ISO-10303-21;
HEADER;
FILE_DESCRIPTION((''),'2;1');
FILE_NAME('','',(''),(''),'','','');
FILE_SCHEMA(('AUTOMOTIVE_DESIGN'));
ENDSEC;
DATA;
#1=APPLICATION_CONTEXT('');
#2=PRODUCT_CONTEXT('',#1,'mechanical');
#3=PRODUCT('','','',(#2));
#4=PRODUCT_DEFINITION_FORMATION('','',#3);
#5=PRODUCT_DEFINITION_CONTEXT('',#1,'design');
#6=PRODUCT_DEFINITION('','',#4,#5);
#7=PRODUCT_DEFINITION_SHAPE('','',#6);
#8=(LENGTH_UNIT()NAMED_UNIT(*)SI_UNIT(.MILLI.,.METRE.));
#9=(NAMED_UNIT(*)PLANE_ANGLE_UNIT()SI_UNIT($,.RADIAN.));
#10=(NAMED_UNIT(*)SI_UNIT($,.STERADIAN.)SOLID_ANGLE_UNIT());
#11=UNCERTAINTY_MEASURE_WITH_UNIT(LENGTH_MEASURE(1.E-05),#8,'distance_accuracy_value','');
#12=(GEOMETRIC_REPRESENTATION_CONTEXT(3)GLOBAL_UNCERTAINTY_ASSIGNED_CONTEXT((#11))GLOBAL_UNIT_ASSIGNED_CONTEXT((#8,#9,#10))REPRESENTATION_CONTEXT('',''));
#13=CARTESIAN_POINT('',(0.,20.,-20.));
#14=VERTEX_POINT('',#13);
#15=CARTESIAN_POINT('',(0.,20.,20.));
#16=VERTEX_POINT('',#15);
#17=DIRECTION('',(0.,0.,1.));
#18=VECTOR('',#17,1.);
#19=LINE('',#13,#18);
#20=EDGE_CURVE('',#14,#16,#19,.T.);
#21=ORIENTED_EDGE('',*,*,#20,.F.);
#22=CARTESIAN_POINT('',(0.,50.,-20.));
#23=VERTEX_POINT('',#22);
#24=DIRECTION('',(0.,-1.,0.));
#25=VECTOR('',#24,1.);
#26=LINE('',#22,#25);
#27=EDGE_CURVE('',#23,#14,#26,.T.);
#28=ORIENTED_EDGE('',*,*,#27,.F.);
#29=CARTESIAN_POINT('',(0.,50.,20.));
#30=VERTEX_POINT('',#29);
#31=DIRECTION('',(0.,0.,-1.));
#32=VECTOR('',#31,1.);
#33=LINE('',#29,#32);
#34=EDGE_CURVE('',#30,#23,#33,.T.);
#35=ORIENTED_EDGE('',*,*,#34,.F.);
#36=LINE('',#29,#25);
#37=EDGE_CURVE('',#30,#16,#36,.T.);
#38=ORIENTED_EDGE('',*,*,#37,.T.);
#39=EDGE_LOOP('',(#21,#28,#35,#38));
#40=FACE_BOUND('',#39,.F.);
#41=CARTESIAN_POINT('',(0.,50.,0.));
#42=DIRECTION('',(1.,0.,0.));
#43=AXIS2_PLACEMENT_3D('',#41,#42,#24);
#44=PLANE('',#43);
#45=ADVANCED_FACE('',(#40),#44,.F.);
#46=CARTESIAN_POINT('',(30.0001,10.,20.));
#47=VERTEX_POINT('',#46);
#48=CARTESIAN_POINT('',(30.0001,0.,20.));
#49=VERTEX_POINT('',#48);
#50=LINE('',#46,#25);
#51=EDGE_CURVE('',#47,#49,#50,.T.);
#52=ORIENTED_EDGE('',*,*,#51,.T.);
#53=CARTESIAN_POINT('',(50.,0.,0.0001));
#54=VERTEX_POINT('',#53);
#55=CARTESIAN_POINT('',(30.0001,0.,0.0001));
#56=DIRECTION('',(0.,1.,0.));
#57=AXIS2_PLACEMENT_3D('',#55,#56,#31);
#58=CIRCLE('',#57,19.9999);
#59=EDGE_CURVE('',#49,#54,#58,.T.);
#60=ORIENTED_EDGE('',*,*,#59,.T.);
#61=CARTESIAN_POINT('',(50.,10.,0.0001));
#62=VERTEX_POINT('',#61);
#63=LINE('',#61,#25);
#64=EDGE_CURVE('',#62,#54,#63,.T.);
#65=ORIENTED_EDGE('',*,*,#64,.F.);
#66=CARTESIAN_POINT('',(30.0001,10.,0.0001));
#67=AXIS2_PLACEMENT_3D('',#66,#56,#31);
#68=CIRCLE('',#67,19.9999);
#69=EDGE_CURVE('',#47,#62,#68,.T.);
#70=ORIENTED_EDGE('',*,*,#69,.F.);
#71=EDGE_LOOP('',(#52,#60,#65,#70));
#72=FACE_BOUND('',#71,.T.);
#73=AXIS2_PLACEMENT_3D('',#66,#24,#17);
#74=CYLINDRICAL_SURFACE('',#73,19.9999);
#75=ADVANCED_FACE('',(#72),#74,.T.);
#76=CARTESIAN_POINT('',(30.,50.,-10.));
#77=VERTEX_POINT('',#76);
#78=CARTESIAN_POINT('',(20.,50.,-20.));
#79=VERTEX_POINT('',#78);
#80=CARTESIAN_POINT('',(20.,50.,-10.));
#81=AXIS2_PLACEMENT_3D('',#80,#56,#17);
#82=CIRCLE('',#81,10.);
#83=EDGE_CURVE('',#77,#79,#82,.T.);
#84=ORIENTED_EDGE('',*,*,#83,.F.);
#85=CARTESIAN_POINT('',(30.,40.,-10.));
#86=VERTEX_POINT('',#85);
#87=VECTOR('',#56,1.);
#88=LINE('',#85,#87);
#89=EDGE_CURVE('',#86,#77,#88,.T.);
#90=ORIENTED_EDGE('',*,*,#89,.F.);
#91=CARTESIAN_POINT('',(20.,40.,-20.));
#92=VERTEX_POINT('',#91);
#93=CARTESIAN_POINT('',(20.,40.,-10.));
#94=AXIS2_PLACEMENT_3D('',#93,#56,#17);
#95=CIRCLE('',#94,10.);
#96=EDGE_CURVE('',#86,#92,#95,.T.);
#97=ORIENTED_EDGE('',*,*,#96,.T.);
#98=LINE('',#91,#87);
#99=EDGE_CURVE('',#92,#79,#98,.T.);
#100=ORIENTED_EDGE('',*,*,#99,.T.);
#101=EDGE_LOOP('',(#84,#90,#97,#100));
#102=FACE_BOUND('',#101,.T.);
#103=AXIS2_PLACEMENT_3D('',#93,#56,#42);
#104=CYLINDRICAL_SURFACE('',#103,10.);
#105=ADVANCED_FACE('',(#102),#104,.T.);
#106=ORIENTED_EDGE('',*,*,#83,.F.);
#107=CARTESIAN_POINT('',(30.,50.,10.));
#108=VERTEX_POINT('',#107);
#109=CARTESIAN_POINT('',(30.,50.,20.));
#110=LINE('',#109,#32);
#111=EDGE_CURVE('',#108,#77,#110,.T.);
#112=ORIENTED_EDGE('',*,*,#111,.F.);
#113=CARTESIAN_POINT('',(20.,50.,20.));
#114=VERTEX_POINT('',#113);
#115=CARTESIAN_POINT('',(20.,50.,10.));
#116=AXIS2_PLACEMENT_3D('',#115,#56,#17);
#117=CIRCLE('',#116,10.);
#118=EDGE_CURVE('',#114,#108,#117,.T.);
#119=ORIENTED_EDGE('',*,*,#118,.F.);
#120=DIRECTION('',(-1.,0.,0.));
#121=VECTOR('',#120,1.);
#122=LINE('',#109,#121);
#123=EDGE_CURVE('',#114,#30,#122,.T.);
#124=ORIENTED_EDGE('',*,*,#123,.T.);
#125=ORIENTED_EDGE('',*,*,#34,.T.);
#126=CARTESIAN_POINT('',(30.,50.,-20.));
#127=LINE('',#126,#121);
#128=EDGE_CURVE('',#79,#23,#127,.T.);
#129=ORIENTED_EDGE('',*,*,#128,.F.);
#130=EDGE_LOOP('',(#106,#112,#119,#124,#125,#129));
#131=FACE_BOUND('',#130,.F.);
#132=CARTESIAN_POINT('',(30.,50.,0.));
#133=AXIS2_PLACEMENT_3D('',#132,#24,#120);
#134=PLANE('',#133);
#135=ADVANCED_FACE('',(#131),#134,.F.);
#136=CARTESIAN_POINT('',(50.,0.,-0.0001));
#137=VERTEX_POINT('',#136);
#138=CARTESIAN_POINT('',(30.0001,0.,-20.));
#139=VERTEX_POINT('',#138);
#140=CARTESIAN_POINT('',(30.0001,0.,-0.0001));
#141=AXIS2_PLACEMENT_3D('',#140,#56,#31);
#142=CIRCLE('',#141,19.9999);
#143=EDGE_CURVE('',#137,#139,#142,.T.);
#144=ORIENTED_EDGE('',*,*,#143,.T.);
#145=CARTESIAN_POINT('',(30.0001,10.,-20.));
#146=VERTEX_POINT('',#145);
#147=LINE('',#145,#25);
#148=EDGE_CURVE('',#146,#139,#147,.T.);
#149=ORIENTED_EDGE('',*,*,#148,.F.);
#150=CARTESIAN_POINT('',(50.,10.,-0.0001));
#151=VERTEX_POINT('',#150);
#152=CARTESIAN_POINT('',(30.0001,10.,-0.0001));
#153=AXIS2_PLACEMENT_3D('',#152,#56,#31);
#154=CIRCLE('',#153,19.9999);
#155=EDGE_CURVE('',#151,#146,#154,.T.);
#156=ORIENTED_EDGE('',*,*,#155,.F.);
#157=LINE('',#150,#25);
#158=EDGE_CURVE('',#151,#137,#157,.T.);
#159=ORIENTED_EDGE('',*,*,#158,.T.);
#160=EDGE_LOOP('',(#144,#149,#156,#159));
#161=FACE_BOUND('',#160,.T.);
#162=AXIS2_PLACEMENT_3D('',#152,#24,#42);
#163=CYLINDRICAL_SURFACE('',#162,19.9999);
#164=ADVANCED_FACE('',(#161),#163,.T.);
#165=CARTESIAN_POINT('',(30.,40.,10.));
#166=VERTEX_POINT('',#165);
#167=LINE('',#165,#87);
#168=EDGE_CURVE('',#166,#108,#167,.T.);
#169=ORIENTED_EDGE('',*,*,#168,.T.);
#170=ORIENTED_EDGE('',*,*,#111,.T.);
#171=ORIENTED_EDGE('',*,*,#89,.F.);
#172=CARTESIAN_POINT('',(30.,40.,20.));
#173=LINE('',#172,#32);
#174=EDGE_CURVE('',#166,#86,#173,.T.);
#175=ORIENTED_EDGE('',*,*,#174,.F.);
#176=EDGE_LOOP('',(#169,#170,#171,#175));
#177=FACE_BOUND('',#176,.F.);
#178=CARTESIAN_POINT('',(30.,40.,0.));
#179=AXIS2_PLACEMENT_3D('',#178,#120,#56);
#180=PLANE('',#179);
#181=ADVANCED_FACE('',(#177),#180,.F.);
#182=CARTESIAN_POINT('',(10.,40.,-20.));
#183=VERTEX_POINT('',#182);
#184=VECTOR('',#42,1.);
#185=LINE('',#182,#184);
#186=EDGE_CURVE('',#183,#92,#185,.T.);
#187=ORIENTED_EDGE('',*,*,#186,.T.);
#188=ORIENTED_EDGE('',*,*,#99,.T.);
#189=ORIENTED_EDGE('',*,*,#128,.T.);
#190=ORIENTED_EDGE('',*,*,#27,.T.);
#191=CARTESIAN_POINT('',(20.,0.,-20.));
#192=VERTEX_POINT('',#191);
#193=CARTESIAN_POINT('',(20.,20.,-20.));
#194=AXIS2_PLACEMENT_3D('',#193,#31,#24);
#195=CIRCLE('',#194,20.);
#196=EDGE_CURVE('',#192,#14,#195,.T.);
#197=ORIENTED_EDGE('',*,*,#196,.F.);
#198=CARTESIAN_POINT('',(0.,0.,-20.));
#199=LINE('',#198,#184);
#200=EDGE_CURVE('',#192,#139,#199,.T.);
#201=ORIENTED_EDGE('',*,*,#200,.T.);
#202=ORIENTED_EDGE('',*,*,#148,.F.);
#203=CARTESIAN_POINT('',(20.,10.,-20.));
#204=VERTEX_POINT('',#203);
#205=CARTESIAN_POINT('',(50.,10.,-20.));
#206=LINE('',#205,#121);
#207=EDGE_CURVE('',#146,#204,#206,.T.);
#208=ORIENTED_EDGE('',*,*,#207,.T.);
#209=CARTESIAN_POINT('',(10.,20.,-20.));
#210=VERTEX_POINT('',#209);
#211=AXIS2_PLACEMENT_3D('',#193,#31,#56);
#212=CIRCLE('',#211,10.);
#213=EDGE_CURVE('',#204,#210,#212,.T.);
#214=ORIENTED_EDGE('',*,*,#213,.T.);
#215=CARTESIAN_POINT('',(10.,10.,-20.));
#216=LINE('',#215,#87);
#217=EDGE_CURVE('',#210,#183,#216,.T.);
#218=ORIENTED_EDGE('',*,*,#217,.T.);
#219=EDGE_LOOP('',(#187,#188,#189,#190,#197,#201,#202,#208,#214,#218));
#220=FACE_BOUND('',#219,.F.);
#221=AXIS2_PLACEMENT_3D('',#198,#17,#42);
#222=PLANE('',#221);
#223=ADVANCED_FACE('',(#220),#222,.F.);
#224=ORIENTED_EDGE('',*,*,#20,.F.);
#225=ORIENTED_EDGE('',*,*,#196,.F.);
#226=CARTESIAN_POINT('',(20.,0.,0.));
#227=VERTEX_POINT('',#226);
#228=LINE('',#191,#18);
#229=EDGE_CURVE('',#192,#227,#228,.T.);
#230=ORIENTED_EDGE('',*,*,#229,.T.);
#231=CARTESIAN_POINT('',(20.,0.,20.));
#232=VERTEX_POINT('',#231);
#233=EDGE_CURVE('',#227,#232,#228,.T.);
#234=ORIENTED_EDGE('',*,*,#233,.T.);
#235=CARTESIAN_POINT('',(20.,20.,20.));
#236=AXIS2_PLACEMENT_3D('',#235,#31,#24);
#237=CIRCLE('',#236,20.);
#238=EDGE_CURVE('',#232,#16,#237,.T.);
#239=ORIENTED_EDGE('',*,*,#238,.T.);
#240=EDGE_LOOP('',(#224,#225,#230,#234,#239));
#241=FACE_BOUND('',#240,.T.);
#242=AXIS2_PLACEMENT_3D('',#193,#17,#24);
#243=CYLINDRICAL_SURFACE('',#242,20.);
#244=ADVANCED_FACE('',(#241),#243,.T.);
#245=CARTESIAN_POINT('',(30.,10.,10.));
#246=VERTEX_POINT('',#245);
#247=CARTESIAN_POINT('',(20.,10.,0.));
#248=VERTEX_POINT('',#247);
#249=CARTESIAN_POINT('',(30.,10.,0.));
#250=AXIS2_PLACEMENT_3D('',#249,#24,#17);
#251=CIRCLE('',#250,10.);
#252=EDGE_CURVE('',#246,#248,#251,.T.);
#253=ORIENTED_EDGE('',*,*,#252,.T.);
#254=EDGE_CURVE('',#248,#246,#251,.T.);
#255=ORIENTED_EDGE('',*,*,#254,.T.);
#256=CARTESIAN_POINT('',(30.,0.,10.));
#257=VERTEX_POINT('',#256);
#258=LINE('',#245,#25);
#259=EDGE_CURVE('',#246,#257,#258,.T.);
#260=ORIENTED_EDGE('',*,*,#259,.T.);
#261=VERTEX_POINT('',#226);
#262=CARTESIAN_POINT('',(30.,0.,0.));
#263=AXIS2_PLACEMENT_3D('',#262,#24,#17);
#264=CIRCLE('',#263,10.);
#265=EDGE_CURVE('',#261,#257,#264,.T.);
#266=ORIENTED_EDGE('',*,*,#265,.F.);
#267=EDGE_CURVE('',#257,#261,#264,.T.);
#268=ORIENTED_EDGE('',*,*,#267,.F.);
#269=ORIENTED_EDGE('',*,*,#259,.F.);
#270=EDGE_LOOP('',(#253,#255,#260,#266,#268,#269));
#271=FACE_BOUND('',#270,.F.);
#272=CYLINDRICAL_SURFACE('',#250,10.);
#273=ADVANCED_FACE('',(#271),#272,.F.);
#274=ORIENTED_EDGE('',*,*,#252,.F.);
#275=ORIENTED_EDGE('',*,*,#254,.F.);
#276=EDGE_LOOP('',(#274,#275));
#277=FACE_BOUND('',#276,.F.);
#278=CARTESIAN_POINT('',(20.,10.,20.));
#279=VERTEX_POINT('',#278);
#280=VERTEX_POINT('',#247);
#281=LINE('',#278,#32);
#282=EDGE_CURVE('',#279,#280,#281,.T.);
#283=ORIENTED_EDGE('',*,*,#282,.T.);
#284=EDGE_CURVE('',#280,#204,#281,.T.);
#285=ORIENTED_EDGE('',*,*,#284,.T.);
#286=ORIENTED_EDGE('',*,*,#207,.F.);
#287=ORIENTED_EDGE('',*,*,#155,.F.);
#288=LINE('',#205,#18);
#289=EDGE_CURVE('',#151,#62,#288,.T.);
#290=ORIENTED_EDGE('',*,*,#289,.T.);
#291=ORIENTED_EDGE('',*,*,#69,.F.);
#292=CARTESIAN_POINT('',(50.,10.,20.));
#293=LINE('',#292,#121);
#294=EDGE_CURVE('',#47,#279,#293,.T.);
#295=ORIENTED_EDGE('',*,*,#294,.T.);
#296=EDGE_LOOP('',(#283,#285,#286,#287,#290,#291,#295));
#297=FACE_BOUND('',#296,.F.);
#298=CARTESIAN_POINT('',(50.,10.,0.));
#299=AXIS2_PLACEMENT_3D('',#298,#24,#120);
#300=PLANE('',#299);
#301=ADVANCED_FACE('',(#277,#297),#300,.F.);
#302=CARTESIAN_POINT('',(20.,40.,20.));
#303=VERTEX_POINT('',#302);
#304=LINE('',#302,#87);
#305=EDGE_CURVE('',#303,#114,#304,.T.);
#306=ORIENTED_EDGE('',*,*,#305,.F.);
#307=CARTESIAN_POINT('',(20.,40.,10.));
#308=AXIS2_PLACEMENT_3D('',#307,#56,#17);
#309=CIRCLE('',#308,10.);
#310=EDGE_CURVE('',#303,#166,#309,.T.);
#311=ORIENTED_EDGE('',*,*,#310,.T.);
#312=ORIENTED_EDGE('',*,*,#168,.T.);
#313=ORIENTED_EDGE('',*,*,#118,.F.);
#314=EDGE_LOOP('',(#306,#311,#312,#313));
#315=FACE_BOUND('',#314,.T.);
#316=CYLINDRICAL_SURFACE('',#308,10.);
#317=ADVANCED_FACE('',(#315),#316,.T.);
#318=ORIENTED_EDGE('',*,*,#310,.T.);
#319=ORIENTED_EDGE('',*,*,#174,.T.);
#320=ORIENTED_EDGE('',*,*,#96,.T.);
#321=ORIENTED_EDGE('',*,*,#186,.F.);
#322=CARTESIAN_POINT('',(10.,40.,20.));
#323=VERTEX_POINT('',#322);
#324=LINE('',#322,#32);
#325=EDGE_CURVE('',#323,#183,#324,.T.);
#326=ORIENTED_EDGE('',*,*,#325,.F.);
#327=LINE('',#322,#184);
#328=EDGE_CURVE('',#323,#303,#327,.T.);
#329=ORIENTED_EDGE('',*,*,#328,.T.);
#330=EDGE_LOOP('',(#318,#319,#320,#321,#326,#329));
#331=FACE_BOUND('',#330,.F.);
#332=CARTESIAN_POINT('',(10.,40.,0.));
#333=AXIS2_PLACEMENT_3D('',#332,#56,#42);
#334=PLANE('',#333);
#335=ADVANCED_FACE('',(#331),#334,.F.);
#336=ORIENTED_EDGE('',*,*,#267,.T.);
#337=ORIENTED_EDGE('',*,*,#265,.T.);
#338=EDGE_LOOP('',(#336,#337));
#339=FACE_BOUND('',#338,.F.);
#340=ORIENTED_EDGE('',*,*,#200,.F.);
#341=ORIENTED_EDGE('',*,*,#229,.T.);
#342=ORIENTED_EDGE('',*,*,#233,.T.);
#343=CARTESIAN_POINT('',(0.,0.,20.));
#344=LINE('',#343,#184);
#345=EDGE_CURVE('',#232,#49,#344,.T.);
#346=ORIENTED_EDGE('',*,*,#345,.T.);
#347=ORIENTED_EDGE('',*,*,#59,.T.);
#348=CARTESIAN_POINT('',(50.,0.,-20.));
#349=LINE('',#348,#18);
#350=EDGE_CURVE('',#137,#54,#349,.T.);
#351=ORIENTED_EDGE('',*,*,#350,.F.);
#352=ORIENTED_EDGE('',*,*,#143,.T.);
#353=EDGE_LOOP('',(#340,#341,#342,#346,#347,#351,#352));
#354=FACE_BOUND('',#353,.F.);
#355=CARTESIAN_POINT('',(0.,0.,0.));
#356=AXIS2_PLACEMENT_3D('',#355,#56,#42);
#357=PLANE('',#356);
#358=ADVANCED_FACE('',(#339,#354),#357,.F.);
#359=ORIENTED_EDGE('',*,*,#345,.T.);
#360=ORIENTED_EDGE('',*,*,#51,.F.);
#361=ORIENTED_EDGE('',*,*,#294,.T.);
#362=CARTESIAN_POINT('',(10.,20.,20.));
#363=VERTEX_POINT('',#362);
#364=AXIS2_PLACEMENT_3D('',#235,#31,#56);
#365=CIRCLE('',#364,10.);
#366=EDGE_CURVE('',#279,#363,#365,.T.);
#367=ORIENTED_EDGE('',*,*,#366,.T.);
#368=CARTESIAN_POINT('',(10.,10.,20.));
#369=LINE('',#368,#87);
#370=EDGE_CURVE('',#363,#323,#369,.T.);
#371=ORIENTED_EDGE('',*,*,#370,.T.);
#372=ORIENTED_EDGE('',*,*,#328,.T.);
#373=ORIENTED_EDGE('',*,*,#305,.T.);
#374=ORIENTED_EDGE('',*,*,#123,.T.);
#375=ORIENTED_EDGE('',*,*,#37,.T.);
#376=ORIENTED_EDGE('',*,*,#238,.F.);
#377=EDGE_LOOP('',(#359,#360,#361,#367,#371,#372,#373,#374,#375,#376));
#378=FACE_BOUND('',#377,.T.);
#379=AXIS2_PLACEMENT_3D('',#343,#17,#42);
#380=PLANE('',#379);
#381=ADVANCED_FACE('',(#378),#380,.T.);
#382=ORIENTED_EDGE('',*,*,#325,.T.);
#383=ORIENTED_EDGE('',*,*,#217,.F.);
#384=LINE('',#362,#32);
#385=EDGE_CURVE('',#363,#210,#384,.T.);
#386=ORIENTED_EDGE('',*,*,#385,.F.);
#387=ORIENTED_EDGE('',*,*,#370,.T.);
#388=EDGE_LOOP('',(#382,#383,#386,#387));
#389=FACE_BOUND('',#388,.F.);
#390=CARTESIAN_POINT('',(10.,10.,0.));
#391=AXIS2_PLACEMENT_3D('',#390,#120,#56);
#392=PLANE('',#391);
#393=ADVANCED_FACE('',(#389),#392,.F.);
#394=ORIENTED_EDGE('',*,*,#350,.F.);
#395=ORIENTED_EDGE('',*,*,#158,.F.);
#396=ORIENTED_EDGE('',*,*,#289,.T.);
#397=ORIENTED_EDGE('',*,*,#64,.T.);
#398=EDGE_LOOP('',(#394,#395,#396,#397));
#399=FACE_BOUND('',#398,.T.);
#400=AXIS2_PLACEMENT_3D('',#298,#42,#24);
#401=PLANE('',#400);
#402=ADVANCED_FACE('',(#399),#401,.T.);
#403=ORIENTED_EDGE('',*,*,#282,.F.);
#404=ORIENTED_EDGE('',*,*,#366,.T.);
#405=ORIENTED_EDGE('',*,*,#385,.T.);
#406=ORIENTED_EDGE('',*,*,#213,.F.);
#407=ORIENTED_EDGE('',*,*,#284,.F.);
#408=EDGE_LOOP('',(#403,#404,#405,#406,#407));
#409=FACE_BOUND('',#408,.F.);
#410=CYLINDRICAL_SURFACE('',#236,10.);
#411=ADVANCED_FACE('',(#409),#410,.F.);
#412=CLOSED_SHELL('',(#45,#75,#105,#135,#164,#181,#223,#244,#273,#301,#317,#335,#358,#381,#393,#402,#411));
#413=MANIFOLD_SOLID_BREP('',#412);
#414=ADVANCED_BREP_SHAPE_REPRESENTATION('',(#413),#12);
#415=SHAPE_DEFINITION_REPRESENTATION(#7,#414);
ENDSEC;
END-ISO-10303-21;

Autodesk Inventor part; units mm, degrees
ref_plane "YZ Plane" through (0, 0, 0) normal (1, 0, 0) x (0, 1, 0)
ref_plane "XZ Plane" through (0, 0, 0) normal (0, 1, 0) x (-1, 0, 0)
ref_plane "XY Plane" through (0, 0, 0) normal (0, 0, 1) x (1, 0, 0)
sketch "草圖1" plane through (0, 0, 0) normal (0, 0, 1) x (1, 0, 0)
  line L0 (0, 0) -> (50, 0)
  line L1 (50, 10) -> (10, 10)
  line L2 (10, 10) -> (10, 40)
  line L3 (10, 40) -> (30, 40)
  line L4 (30, 40) -> (30, 50)
  line L5 (30, 50) -> (0, 50)
  line L6 (0, 50) -> (0, 0)
  line L7 (50, 10) -> (50, 0)
  dimension "d0" = 50
  dimension "d1" = 10
  dimension "d2" = 30
  dimension "d3" = 30
  dimension "d4" = 10
  dimension "d5" = 50
extrude "擠出1" add sketch "草圖1" along normal mid plane 40
fillet "圓角1" radius 20 2 edges at (50, 5, 20) (50, 5, -20)
fillet "圓角2" radius 20 1 edges at (0, 0, 0)
fillet "圓角3" radius 10 1 edges at (10, 10, 0)
fillet "圓角4" radius 10 2 edges at (30, 45, 20) (30, 45, -20)
sketch "草圖2" plane through (30, 10, 0) normal (0, 1, 0) x (1, 0, 0)
  arc A0 (0, -20) -> (0, 20) centre (0, 0) ccw projected
  point P0 (-30, 0)
hole "孔1" at (30, 10, 0) direction (0, -1, 0) diameter 20 end through all
